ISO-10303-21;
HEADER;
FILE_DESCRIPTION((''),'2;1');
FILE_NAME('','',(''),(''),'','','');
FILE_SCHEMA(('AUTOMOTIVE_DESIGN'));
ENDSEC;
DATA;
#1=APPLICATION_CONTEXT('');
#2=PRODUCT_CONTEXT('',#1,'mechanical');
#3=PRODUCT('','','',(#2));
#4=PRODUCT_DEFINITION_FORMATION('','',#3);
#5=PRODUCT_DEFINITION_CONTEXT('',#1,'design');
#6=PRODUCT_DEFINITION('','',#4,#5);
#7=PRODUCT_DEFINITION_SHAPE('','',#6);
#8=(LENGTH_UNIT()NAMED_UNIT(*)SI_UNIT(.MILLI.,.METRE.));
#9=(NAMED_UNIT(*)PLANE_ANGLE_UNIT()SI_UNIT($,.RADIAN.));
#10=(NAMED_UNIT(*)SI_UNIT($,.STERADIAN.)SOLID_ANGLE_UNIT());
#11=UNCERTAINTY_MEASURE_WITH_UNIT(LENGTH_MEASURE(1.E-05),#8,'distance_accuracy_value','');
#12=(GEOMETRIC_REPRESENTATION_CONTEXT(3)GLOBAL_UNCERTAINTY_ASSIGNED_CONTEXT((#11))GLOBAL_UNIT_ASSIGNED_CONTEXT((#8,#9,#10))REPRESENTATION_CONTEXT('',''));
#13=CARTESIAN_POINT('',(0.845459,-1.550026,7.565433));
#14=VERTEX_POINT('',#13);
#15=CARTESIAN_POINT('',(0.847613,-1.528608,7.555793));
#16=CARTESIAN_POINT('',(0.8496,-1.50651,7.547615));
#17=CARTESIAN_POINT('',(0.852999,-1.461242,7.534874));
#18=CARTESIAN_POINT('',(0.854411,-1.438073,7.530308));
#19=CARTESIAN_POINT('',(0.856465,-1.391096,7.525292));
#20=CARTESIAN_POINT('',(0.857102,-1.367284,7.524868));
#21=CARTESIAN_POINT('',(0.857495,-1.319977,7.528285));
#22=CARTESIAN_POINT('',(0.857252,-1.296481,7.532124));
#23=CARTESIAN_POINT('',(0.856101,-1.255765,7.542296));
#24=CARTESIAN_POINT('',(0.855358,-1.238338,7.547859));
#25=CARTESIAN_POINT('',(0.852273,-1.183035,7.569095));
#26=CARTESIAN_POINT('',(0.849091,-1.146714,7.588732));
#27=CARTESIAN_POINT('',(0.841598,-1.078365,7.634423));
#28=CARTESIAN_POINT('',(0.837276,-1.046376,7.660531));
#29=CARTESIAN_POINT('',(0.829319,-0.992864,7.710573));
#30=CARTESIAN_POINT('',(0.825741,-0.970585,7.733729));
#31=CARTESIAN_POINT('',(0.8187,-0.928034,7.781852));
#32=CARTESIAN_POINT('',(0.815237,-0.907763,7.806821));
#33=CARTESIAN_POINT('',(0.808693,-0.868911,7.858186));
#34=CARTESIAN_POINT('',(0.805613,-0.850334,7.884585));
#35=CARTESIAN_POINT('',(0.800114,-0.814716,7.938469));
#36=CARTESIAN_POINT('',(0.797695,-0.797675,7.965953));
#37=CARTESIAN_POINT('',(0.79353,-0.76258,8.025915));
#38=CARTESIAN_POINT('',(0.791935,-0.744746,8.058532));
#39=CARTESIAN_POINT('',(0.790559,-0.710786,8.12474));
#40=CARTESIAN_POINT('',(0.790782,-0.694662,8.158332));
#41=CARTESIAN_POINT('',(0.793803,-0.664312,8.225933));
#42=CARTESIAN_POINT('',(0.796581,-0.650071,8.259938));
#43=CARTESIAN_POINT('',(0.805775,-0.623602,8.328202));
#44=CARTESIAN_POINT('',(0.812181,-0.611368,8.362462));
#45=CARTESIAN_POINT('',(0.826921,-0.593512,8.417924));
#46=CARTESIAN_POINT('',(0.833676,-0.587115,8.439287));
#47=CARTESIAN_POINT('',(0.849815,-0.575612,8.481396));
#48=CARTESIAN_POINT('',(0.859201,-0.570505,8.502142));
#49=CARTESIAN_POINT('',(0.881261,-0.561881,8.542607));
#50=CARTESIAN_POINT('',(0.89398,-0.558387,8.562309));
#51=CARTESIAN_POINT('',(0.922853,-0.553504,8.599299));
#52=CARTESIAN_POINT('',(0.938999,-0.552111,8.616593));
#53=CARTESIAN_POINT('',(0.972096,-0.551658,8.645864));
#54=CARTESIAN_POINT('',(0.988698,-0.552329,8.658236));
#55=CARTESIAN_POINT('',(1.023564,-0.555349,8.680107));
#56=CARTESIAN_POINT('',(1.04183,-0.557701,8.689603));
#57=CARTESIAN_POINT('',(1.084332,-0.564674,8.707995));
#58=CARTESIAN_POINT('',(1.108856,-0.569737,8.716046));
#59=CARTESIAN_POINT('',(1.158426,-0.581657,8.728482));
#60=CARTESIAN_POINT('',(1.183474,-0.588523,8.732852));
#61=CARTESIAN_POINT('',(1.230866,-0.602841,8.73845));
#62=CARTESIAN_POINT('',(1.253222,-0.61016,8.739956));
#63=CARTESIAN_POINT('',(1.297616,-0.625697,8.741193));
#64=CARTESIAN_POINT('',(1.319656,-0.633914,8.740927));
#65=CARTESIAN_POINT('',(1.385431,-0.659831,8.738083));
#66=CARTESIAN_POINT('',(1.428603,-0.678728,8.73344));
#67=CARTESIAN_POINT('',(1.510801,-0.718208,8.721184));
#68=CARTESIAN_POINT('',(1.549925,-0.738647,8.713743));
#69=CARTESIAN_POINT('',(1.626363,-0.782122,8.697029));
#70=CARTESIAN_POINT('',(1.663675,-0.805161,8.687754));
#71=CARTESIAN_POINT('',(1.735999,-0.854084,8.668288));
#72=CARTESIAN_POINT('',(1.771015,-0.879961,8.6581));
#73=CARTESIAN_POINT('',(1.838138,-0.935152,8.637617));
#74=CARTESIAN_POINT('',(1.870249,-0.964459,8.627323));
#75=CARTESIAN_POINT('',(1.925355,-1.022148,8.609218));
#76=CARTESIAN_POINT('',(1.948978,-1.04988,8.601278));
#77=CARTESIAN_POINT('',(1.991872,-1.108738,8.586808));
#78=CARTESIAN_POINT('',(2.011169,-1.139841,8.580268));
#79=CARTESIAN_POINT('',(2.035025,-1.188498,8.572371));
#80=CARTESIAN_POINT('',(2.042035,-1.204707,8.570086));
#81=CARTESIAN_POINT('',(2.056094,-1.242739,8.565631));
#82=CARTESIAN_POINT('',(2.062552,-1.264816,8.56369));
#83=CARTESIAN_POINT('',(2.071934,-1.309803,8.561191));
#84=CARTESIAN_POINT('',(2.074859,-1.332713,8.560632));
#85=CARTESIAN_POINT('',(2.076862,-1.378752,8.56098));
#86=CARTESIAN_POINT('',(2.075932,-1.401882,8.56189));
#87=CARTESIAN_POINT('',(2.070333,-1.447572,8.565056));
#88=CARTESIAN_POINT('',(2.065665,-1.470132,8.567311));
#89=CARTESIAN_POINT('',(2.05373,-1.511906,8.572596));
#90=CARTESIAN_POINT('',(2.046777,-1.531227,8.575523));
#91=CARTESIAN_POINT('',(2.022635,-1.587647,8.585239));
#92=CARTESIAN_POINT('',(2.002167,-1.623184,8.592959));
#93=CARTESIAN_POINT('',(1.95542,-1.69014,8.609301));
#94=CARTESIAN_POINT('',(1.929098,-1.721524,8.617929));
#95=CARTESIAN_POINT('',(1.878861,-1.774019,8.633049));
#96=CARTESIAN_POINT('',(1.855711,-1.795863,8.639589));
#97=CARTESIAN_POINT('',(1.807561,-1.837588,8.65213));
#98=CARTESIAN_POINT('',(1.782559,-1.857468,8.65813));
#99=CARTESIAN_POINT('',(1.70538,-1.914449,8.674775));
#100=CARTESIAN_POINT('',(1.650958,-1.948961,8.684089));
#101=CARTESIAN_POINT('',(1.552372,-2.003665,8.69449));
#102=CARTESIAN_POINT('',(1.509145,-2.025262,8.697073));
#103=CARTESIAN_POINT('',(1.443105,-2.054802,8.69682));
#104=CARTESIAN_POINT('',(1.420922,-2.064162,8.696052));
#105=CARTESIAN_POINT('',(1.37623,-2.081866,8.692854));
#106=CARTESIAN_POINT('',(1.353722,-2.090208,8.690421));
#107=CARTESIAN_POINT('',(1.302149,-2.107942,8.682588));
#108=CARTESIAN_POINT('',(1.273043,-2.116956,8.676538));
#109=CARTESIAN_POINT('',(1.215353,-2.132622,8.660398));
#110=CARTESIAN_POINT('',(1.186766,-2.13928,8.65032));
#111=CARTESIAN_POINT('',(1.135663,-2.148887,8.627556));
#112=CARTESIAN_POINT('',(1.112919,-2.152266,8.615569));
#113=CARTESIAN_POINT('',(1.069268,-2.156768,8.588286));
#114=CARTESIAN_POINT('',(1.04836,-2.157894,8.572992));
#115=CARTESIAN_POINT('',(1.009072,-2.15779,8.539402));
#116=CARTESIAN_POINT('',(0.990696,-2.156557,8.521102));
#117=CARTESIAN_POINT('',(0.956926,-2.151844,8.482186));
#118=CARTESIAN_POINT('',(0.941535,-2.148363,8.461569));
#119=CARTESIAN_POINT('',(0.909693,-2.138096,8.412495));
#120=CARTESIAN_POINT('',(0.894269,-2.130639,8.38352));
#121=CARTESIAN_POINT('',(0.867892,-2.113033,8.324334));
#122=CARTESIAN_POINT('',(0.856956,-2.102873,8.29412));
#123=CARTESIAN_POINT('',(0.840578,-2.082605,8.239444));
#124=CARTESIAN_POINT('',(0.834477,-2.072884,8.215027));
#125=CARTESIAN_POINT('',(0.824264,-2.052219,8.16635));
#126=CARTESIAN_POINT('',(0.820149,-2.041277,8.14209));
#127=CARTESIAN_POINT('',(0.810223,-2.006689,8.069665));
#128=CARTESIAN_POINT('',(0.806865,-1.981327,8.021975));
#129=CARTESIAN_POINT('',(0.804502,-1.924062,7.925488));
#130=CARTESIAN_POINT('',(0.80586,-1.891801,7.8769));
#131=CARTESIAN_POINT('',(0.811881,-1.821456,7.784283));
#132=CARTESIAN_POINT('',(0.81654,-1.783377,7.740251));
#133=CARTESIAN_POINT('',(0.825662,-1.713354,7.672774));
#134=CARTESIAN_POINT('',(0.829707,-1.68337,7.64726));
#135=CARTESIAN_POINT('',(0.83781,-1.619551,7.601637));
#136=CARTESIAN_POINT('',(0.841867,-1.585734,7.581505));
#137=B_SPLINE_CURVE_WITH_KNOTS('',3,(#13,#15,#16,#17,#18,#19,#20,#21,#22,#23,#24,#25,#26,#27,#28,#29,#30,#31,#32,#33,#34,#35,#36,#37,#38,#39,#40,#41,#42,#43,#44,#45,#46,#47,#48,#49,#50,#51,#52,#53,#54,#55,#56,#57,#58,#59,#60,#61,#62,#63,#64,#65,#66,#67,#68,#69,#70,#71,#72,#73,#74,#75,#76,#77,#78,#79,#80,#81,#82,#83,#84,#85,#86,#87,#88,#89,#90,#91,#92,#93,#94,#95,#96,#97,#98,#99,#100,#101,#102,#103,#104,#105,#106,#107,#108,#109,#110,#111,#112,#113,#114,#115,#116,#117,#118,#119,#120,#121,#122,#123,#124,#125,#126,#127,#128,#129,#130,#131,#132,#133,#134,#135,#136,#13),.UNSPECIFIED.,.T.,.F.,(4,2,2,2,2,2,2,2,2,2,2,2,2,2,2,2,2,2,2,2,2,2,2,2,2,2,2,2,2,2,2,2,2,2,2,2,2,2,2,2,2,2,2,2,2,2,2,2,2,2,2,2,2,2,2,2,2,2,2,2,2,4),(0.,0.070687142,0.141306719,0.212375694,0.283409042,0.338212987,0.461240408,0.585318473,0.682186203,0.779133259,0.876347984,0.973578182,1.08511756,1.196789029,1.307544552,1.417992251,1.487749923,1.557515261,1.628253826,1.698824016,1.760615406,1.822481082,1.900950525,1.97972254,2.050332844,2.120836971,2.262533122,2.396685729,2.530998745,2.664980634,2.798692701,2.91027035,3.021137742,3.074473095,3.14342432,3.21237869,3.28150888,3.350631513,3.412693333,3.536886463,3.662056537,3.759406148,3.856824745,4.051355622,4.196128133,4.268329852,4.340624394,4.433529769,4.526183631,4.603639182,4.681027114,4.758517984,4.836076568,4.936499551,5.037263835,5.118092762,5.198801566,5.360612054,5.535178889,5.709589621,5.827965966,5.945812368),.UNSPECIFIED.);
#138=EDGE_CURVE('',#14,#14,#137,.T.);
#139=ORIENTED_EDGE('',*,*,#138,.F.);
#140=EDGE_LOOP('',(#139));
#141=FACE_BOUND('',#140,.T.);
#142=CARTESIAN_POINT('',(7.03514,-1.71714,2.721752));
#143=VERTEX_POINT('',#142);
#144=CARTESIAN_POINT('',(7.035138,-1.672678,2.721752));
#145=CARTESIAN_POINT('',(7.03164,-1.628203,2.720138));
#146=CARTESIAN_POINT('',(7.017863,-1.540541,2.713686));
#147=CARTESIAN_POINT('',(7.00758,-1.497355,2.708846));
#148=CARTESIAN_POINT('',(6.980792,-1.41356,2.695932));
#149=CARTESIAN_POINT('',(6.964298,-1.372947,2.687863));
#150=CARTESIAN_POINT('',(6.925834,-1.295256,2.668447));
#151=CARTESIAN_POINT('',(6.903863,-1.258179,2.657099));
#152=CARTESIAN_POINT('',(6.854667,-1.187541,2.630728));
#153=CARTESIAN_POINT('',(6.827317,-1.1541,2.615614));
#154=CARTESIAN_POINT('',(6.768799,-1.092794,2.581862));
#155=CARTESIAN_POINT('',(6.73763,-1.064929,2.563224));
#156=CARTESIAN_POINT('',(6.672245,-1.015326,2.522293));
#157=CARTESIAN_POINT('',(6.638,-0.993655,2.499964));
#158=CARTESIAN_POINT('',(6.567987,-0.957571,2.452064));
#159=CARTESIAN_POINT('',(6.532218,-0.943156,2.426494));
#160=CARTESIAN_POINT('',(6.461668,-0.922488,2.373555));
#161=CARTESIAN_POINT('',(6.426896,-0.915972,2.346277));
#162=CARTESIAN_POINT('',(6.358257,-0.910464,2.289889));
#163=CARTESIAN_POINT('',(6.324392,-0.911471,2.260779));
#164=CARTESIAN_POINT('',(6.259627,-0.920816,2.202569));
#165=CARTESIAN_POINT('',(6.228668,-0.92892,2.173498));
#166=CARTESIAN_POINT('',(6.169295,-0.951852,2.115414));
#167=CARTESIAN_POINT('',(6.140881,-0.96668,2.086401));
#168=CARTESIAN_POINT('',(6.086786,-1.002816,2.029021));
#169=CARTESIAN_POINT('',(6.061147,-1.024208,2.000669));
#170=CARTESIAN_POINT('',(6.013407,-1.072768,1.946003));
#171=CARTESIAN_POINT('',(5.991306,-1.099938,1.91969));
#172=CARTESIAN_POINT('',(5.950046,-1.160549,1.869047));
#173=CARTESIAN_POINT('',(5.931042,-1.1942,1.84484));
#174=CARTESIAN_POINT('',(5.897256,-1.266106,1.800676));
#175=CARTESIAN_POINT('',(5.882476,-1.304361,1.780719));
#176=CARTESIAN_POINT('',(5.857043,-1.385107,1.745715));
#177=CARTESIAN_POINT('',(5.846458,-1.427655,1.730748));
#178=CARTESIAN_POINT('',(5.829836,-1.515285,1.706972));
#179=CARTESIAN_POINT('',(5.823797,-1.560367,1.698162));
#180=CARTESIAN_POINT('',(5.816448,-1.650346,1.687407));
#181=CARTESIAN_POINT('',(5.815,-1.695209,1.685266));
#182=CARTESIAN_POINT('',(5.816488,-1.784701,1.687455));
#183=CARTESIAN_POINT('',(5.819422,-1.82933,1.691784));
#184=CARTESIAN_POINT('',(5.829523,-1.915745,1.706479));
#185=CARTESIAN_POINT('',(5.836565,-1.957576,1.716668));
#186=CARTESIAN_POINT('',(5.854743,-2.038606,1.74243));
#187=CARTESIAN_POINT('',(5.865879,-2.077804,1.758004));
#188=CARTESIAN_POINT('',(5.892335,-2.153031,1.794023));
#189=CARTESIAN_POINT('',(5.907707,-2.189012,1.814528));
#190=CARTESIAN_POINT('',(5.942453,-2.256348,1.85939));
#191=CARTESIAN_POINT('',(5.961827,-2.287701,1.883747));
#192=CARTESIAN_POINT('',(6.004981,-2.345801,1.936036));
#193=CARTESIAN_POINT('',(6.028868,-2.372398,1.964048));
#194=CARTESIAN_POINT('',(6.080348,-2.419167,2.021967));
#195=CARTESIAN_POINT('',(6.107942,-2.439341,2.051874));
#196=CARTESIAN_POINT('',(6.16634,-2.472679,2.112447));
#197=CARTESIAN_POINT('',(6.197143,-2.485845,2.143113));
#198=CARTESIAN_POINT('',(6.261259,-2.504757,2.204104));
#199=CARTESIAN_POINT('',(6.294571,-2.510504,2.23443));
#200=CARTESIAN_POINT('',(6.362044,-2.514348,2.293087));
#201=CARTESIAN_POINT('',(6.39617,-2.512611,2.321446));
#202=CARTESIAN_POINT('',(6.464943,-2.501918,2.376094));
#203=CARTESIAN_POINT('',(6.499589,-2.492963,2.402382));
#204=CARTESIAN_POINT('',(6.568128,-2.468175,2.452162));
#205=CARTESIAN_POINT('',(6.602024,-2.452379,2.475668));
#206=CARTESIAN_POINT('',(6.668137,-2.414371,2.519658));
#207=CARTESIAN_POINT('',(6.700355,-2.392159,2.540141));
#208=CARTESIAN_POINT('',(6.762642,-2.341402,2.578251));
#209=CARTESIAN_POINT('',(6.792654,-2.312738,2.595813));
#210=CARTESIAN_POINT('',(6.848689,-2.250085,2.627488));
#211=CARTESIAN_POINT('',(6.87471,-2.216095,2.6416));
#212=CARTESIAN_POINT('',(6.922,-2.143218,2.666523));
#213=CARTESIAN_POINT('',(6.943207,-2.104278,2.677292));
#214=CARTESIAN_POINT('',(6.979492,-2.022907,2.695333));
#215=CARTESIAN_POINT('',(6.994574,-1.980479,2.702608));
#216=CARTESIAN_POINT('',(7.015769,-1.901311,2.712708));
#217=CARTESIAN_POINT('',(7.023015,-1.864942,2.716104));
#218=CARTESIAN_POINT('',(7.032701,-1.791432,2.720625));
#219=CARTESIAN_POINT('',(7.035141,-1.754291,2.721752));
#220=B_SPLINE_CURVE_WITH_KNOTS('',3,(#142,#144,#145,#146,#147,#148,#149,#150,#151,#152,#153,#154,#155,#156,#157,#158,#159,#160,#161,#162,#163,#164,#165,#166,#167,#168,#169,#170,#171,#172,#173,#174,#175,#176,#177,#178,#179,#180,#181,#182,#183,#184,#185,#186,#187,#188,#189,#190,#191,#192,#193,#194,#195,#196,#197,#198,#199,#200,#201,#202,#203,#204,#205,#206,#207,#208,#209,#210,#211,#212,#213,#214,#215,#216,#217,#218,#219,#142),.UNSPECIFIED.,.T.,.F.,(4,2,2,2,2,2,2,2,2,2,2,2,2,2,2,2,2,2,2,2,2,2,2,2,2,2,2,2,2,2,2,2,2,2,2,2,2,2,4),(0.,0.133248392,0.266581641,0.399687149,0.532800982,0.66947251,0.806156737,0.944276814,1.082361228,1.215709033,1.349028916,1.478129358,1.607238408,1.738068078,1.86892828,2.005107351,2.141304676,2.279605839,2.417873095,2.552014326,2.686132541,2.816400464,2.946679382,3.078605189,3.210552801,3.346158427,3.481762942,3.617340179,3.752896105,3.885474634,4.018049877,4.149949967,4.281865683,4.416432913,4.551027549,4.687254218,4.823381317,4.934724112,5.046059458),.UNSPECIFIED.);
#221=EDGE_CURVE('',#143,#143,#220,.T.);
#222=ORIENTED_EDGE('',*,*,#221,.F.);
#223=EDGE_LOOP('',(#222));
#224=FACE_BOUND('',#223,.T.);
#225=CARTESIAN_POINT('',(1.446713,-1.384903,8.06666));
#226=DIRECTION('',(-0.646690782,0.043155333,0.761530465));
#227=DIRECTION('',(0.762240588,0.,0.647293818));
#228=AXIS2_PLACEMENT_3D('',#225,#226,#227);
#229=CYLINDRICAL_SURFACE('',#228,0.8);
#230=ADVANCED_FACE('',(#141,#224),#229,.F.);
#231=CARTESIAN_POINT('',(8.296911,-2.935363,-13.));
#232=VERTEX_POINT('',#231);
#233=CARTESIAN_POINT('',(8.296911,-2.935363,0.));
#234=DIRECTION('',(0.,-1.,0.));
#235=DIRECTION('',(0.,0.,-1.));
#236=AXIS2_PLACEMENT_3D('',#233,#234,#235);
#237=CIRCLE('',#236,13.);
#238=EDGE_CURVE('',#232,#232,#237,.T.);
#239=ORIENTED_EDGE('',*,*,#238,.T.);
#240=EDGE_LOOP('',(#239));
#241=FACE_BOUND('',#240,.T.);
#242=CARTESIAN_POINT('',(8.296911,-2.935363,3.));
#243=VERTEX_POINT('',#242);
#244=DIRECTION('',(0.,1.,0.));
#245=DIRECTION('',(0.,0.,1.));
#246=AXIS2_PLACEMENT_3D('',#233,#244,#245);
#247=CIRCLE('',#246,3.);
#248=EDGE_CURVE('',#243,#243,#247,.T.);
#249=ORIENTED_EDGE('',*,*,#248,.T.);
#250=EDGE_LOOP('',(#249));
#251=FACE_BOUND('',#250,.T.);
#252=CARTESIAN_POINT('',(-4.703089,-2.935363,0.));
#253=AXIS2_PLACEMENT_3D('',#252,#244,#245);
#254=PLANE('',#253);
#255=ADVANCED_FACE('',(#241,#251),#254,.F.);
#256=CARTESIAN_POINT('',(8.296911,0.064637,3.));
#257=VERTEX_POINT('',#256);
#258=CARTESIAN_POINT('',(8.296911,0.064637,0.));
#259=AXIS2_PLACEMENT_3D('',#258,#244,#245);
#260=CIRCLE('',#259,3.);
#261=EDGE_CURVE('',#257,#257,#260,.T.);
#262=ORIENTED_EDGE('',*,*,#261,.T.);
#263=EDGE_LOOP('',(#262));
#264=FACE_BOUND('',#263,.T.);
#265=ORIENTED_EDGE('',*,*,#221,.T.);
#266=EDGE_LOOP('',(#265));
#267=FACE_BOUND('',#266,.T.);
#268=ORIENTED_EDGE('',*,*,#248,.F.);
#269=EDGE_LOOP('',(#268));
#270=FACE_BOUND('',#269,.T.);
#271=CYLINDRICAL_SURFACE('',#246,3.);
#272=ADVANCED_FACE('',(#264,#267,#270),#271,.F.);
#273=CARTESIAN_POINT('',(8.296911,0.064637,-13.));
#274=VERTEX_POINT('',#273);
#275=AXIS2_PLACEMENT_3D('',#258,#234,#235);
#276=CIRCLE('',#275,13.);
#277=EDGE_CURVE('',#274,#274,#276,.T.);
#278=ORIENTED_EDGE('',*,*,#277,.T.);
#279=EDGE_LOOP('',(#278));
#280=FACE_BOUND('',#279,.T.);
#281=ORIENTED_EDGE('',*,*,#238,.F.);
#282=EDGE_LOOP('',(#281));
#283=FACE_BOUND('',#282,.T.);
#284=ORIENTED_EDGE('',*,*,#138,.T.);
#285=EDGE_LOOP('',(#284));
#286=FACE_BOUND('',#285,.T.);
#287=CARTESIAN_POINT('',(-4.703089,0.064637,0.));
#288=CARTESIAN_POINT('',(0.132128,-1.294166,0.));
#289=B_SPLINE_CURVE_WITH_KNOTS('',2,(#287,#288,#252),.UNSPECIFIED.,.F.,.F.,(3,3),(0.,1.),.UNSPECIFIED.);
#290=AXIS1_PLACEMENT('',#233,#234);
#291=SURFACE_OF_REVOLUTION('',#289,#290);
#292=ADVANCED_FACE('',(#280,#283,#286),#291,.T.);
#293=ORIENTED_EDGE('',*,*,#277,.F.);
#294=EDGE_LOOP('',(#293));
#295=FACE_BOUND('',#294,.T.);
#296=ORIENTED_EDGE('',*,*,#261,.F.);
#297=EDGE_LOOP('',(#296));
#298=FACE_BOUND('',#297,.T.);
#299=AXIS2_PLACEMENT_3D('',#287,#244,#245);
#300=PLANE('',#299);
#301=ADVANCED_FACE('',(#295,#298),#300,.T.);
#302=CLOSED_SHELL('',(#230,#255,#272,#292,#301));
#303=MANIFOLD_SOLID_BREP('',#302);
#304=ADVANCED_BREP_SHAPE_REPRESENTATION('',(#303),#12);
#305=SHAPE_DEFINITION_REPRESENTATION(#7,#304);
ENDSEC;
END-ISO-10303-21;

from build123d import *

# Parameters (mm, degrees)
SKETCH117_R                   = 3
CUT_EXTRUDE4_DEPTH            = 3
M2X0_4_START                  = -5.931289347
M2X0_4_TAPPED_HOLE1_OUTLINE_R = 0.8
M2X0_4_TAPPED_HOLE1_DEPTH     = 8.484952251


# Read off the part's stored shape, not the designer's step: M2x0.4 Tapped Hole1
with BuildPart() as part:
    # Sketch9 → Revolve1 (revolve)
    with BuildSketch(Plane.XY):
        with BuildLine():
            Line((-4.703089141, -2.935363462), (8.296910859, -2.935363462))
            Line((8.296910859, -2.935363462), (8.296910859, 0.064636538))
            Line((8.296910859, 0.064636538), (-4.703089141, 0.064636538))
            add(Edge.make_bspline(
                [(-4.703089141, 0.064636538), (0.132127885, -1.294166307), (-4.703089141, -2.935363462)],
                knots=[0, 0, 0, 1, 1, 1], degree=2))
        make_face()
    revolve(axis=Axis((8.296910859, -2.935363462, 0), (0, 1, 0)))

    # Sketch117 → Cut-Extrude4 (cut)
    with BuildSketch(Plane(origin=(0, 0.064636538, 0), x_dir=(1, 0, 0), z_dir=(0, 1, 0))):
        with Locations(Location((8.29691086, 0, 0), (0, 0, 270))):
            Circle(SKETCH117_R)
    extrude(amount=-CUT_EXTRUDE4_DEPTH, mode=Mode.SUBTRACT)

    # M2x0.4 Tapped Hole1 outline → M2x0.4 Tapped Hole1 (cut)
    with BuildSketch(Plane(origin=(0, 0, 0), x_dir=(0.7627522743476953, 0.03658875504667491, 0.6456548853540508), z_dir=(0.6466907823507446, -0.04315533310364318, -0.7615304650815327)).offset(M2X0_4_START)):
        with Locations((6.261089871, 1.839084068)):
            Circle(M2X0_4_TAPPED_HOLE1_OUTLINE_R)
    extrude(amount=M2X0_4_TAPPED_HOLE1_DEPTH, mode=Mode.SUBTRACT)


solid = part.part
